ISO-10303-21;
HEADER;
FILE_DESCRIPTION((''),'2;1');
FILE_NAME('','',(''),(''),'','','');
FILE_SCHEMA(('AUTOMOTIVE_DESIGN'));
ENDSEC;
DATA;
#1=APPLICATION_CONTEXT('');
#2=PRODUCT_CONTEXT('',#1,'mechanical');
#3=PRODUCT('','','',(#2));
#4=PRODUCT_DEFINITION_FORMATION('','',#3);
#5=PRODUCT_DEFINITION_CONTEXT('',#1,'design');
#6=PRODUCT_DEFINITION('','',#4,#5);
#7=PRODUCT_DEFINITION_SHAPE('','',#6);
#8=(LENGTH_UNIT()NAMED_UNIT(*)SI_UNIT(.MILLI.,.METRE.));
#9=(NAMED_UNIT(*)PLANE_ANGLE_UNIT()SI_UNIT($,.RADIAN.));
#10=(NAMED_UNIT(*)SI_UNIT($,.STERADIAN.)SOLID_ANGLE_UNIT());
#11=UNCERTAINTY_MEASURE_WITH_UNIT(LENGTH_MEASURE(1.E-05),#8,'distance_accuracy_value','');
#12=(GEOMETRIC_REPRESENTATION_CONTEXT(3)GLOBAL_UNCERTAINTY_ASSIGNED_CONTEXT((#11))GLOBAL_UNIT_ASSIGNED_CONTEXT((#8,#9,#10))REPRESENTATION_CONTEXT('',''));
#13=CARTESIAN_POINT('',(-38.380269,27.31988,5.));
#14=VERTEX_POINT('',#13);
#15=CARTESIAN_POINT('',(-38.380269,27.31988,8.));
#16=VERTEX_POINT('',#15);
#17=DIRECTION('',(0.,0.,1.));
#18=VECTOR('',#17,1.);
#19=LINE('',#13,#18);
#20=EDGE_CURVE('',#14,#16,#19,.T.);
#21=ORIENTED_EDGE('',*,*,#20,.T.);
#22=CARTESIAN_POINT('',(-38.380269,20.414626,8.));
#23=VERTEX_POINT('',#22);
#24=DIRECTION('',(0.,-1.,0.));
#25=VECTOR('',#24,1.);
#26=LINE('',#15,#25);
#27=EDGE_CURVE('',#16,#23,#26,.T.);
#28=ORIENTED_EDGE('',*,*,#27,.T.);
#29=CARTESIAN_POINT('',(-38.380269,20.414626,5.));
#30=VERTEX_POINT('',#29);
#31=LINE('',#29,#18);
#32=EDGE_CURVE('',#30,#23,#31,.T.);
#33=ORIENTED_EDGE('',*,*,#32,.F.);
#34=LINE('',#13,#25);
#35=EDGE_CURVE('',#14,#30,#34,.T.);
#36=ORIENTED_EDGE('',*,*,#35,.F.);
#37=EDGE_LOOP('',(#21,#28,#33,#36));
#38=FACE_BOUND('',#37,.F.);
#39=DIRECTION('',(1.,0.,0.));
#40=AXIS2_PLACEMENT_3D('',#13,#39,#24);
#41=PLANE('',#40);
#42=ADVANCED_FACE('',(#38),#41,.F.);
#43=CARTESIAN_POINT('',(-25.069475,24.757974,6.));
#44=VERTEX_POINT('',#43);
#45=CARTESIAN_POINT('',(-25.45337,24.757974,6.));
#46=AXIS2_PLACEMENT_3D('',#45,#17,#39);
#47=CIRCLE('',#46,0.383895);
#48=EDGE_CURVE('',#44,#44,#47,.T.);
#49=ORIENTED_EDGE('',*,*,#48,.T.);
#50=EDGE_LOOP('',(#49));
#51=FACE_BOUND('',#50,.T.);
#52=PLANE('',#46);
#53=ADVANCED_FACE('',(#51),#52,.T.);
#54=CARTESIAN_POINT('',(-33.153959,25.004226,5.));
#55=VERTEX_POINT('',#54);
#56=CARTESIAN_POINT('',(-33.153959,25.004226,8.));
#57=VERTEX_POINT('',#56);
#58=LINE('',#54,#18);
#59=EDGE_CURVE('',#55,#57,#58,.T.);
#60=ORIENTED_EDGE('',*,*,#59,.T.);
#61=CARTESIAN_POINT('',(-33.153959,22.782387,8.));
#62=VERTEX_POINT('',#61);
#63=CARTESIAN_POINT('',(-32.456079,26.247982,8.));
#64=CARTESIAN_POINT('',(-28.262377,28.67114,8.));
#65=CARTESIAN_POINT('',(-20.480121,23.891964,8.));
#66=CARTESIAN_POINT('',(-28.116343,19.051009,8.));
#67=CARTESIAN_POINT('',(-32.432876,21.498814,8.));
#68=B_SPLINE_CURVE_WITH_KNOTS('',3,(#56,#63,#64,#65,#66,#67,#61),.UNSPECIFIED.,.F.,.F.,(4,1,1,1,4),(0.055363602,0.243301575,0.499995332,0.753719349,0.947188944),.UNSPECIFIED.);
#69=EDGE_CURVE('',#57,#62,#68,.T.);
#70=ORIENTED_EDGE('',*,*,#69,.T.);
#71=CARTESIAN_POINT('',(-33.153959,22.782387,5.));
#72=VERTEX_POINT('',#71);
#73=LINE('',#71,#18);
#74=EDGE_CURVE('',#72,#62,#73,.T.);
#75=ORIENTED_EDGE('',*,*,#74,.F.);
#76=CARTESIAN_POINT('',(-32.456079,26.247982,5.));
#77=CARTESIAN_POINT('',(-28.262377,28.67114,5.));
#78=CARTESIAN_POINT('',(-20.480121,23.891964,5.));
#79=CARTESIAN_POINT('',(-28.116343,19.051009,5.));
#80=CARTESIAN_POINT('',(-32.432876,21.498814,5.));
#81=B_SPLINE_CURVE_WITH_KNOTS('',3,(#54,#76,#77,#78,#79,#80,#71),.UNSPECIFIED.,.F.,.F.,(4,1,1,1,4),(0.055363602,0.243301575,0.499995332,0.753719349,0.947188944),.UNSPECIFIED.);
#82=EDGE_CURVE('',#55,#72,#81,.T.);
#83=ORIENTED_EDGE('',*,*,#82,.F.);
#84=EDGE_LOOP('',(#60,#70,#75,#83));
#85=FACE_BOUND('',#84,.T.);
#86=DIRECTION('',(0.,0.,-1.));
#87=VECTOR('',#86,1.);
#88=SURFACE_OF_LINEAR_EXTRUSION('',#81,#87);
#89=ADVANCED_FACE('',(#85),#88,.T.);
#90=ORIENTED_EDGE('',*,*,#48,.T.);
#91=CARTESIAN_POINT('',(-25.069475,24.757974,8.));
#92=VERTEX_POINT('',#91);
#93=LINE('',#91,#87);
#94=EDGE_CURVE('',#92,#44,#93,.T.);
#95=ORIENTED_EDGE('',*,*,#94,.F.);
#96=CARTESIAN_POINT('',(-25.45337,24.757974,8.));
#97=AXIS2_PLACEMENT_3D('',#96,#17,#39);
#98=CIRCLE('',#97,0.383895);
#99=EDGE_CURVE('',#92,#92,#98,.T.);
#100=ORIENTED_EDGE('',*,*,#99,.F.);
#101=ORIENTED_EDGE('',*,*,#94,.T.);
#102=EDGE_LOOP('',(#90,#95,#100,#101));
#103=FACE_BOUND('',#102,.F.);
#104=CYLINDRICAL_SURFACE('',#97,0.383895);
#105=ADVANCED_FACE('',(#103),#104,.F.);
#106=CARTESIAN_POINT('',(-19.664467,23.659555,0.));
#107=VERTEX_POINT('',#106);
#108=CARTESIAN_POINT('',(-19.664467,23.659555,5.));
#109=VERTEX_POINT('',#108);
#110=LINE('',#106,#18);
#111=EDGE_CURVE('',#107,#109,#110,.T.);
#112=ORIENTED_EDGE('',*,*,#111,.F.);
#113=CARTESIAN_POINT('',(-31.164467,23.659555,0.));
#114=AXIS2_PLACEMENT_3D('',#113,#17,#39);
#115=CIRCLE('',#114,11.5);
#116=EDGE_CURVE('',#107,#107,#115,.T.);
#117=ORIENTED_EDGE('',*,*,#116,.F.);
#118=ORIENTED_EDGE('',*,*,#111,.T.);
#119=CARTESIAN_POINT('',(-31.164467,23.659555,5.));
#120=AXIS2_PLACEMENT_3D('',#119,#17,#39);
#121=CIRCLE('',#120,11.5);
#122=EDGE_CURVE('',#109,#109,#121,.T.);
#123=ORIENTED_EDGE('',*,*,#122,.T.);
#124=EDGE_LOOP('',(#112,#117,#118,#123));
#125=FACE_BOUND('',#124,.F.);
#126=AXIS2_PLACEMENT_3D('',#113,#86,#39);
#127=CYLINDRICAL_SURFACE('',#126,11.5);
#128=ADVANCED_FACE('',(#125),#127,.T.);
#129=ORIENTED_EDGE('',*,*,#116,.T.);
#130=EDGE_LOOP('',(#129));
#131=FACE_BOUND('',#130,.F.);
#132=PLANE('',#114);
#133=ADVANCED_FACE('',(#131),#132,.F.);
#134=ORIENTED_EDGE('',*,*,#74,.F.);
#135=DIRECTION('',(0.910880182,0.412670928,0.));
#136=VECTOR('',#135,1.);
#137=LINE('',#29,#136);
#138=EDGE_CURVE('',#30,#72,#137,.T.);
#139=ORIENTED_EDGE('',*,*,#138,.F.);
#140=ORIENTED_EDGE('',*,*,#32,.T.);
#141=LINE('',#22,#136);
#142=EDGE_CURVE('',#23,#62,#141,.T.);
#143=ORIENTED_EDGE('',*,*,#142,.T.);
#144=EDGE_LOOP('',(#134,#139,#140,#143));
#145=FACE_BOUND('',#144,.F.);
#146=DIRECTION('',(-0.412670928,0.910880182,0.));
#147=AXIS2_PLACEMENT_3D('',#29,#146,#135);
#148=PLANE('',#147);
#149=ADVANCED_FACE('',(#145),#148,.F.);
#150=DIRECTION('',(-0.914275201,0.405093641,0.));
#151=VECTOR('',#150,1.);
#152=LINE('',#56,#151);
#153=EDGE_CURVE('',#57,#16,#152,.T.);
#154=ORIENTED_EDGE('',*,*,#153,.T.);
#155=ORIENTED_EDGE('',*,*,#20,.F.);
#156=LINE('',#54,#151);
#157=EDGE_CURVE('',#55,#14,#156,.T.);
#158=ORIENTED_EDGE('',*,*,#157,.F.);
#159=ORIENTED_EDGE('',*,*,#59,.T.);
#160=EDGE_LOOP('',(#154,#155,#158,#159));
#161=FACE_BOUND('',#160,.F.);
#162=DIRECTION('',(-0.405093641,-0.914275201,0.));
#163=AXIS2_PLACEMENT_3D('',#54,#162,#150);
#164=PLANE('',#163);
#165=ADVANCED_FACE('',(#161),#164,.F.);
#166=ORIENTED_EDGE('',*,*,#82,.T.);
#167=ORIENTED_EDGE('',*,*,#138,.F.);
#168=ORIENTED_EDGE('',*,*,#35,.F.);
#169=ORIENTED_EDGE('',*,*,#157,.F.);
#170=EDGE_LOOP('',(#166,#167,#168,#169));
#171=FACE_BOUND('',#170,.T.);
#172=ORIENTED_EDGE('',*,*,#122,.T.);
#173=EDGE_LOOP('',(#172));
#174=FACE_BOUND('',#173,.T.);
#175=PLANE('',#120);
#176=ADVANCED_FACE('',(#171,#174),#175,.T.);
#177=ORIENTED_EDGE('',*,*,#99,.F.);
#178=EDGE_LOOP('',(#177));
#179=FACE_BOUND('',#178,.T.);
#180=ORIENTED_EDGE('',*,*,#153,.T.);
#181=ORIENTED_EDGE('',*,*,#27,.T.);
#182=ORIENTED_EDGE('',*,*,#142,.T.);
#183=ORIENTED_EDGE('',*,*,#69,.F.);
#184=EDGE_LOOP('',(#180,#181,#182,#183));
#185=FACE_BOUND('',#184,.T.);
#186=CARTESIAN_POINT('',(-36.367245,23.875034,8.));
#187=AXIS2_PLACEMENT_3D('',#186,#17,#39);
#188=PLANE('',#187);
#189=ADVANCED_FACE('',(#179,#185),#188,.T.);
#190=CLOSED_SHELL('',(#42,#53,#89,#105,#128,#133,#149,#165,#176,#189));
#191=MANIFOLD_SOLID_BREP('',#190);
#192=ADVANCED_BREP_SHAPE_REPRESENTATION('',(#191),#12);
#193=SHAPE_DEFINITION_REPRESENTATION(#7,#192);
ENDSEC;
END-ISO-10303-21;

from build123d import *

# Parameters (mm, degrees)
F0_R     = 11.5
F1_DEPTH = 5
F3_DEPTH = 3
F4_R     = 0.3838948085
F5_DEPTH = 2


with BuildPart() as f1:
    # F0 (on Top) → F1 (new body)
    with BuildSketch(Plane.XY):
        with Locations((-31.1644673347, 23.6595552415)):
            Circle(F0_R)
    extrude(amount=F1_DEPTH)

    # F2 (on face) → F3 (join)
    with BuildSketch(Plane.XY.offset(5)):
        with BuildLine():
            add(Edge.make_bspline(
                [(-33.1539588035, 22.7823868875), (-33.3507914741, 23.1327616424), (-33.4622053799, 23.4998701067), (-33.4669202566, 23.8672532141)],
                knots=[0.9471889438, 0.9471889438, 0.9471889438, 0.9471889438, 1, 1, 1, 1], degree=3))
            add(Edge.make_bspline(
                [(-33.4669202566, 23.8672532141), (-33.47186302, 24.2523932514), (-33.3595432056, 24.6378351224), (-33.1539588035, 25.0042262209)],
                knots=[0, 0, 0, 0, 0.0553636021, 0.0553636021, 0.0553636021, 0.0553636021], degree=3))
            Line((-33.1539588035, 25.0042262209), (-38.3802689612, 27.3198802024))
            Line((-38.3802689612, 27.3198802024), (-38.3802689612, 20.4146262258))
            Line((-38.3802689612, 20.4146262258), (-33.1539588035, 22.7823868875))
        make_face()
        with BuildLine():
            add(Edge.make_bspline(
                [(-33.4669202566, 23.8672532141), (-33.47186302, 24.2523932514), (-33.3595432056, 24.6378351224), (-33.1539588035, 25.0042262209)],
                knots=[0, 0, 0, 0, 0.0553636021, 0.0553636021, 0.0553636021, 0.0553636021], degree=3))
            add(Edge.make_bspline(
                [(-33.1539588035, 22.7823868875), (-33.3507914741, 23.1327616424), (-33.4622053799, 23.4998701067), (-33.4669202566, 23.8672532141)],
                knots=[0.9471889438, 0.9471889438, 0.9471889438, 0.9471889438, 1, 1, 1, 1], degree=3))
            add(Edge.make_bspline(
                [(-33.1539588035, 25.0042262209), (-32.4560794327, 26.2479820054), (-28.2623769018, 28.6711404266), (-20.4801214372, 23.8919640928), (-28.1163432289, 19.0510090022), (-32.4328761402, 21.498813583), (-33.1539588035, 22.7823868875)],
                knots=[0.0553636021, 0.0553636021, 0.0553636021, 0.0553636021, 0.243301575, 0.499995332, 0.7537193486, 0.9471889438, 0.9471889438, 0.9471889438, 0.9471889438], degree=3))
        make_face()
    extrude(amount=F3_DEPTH)

    # F4 (on face) → F5 (cut)
    with BuildSketch(Plane.XY.offset(8)):
        with Locations((-25.4533700645, 24.7579738498)):
            Circle(F4_R)
    extrude(amount=-F5_DEPTH, mode=Mode.SUBTRACT)


solid = f1.part
